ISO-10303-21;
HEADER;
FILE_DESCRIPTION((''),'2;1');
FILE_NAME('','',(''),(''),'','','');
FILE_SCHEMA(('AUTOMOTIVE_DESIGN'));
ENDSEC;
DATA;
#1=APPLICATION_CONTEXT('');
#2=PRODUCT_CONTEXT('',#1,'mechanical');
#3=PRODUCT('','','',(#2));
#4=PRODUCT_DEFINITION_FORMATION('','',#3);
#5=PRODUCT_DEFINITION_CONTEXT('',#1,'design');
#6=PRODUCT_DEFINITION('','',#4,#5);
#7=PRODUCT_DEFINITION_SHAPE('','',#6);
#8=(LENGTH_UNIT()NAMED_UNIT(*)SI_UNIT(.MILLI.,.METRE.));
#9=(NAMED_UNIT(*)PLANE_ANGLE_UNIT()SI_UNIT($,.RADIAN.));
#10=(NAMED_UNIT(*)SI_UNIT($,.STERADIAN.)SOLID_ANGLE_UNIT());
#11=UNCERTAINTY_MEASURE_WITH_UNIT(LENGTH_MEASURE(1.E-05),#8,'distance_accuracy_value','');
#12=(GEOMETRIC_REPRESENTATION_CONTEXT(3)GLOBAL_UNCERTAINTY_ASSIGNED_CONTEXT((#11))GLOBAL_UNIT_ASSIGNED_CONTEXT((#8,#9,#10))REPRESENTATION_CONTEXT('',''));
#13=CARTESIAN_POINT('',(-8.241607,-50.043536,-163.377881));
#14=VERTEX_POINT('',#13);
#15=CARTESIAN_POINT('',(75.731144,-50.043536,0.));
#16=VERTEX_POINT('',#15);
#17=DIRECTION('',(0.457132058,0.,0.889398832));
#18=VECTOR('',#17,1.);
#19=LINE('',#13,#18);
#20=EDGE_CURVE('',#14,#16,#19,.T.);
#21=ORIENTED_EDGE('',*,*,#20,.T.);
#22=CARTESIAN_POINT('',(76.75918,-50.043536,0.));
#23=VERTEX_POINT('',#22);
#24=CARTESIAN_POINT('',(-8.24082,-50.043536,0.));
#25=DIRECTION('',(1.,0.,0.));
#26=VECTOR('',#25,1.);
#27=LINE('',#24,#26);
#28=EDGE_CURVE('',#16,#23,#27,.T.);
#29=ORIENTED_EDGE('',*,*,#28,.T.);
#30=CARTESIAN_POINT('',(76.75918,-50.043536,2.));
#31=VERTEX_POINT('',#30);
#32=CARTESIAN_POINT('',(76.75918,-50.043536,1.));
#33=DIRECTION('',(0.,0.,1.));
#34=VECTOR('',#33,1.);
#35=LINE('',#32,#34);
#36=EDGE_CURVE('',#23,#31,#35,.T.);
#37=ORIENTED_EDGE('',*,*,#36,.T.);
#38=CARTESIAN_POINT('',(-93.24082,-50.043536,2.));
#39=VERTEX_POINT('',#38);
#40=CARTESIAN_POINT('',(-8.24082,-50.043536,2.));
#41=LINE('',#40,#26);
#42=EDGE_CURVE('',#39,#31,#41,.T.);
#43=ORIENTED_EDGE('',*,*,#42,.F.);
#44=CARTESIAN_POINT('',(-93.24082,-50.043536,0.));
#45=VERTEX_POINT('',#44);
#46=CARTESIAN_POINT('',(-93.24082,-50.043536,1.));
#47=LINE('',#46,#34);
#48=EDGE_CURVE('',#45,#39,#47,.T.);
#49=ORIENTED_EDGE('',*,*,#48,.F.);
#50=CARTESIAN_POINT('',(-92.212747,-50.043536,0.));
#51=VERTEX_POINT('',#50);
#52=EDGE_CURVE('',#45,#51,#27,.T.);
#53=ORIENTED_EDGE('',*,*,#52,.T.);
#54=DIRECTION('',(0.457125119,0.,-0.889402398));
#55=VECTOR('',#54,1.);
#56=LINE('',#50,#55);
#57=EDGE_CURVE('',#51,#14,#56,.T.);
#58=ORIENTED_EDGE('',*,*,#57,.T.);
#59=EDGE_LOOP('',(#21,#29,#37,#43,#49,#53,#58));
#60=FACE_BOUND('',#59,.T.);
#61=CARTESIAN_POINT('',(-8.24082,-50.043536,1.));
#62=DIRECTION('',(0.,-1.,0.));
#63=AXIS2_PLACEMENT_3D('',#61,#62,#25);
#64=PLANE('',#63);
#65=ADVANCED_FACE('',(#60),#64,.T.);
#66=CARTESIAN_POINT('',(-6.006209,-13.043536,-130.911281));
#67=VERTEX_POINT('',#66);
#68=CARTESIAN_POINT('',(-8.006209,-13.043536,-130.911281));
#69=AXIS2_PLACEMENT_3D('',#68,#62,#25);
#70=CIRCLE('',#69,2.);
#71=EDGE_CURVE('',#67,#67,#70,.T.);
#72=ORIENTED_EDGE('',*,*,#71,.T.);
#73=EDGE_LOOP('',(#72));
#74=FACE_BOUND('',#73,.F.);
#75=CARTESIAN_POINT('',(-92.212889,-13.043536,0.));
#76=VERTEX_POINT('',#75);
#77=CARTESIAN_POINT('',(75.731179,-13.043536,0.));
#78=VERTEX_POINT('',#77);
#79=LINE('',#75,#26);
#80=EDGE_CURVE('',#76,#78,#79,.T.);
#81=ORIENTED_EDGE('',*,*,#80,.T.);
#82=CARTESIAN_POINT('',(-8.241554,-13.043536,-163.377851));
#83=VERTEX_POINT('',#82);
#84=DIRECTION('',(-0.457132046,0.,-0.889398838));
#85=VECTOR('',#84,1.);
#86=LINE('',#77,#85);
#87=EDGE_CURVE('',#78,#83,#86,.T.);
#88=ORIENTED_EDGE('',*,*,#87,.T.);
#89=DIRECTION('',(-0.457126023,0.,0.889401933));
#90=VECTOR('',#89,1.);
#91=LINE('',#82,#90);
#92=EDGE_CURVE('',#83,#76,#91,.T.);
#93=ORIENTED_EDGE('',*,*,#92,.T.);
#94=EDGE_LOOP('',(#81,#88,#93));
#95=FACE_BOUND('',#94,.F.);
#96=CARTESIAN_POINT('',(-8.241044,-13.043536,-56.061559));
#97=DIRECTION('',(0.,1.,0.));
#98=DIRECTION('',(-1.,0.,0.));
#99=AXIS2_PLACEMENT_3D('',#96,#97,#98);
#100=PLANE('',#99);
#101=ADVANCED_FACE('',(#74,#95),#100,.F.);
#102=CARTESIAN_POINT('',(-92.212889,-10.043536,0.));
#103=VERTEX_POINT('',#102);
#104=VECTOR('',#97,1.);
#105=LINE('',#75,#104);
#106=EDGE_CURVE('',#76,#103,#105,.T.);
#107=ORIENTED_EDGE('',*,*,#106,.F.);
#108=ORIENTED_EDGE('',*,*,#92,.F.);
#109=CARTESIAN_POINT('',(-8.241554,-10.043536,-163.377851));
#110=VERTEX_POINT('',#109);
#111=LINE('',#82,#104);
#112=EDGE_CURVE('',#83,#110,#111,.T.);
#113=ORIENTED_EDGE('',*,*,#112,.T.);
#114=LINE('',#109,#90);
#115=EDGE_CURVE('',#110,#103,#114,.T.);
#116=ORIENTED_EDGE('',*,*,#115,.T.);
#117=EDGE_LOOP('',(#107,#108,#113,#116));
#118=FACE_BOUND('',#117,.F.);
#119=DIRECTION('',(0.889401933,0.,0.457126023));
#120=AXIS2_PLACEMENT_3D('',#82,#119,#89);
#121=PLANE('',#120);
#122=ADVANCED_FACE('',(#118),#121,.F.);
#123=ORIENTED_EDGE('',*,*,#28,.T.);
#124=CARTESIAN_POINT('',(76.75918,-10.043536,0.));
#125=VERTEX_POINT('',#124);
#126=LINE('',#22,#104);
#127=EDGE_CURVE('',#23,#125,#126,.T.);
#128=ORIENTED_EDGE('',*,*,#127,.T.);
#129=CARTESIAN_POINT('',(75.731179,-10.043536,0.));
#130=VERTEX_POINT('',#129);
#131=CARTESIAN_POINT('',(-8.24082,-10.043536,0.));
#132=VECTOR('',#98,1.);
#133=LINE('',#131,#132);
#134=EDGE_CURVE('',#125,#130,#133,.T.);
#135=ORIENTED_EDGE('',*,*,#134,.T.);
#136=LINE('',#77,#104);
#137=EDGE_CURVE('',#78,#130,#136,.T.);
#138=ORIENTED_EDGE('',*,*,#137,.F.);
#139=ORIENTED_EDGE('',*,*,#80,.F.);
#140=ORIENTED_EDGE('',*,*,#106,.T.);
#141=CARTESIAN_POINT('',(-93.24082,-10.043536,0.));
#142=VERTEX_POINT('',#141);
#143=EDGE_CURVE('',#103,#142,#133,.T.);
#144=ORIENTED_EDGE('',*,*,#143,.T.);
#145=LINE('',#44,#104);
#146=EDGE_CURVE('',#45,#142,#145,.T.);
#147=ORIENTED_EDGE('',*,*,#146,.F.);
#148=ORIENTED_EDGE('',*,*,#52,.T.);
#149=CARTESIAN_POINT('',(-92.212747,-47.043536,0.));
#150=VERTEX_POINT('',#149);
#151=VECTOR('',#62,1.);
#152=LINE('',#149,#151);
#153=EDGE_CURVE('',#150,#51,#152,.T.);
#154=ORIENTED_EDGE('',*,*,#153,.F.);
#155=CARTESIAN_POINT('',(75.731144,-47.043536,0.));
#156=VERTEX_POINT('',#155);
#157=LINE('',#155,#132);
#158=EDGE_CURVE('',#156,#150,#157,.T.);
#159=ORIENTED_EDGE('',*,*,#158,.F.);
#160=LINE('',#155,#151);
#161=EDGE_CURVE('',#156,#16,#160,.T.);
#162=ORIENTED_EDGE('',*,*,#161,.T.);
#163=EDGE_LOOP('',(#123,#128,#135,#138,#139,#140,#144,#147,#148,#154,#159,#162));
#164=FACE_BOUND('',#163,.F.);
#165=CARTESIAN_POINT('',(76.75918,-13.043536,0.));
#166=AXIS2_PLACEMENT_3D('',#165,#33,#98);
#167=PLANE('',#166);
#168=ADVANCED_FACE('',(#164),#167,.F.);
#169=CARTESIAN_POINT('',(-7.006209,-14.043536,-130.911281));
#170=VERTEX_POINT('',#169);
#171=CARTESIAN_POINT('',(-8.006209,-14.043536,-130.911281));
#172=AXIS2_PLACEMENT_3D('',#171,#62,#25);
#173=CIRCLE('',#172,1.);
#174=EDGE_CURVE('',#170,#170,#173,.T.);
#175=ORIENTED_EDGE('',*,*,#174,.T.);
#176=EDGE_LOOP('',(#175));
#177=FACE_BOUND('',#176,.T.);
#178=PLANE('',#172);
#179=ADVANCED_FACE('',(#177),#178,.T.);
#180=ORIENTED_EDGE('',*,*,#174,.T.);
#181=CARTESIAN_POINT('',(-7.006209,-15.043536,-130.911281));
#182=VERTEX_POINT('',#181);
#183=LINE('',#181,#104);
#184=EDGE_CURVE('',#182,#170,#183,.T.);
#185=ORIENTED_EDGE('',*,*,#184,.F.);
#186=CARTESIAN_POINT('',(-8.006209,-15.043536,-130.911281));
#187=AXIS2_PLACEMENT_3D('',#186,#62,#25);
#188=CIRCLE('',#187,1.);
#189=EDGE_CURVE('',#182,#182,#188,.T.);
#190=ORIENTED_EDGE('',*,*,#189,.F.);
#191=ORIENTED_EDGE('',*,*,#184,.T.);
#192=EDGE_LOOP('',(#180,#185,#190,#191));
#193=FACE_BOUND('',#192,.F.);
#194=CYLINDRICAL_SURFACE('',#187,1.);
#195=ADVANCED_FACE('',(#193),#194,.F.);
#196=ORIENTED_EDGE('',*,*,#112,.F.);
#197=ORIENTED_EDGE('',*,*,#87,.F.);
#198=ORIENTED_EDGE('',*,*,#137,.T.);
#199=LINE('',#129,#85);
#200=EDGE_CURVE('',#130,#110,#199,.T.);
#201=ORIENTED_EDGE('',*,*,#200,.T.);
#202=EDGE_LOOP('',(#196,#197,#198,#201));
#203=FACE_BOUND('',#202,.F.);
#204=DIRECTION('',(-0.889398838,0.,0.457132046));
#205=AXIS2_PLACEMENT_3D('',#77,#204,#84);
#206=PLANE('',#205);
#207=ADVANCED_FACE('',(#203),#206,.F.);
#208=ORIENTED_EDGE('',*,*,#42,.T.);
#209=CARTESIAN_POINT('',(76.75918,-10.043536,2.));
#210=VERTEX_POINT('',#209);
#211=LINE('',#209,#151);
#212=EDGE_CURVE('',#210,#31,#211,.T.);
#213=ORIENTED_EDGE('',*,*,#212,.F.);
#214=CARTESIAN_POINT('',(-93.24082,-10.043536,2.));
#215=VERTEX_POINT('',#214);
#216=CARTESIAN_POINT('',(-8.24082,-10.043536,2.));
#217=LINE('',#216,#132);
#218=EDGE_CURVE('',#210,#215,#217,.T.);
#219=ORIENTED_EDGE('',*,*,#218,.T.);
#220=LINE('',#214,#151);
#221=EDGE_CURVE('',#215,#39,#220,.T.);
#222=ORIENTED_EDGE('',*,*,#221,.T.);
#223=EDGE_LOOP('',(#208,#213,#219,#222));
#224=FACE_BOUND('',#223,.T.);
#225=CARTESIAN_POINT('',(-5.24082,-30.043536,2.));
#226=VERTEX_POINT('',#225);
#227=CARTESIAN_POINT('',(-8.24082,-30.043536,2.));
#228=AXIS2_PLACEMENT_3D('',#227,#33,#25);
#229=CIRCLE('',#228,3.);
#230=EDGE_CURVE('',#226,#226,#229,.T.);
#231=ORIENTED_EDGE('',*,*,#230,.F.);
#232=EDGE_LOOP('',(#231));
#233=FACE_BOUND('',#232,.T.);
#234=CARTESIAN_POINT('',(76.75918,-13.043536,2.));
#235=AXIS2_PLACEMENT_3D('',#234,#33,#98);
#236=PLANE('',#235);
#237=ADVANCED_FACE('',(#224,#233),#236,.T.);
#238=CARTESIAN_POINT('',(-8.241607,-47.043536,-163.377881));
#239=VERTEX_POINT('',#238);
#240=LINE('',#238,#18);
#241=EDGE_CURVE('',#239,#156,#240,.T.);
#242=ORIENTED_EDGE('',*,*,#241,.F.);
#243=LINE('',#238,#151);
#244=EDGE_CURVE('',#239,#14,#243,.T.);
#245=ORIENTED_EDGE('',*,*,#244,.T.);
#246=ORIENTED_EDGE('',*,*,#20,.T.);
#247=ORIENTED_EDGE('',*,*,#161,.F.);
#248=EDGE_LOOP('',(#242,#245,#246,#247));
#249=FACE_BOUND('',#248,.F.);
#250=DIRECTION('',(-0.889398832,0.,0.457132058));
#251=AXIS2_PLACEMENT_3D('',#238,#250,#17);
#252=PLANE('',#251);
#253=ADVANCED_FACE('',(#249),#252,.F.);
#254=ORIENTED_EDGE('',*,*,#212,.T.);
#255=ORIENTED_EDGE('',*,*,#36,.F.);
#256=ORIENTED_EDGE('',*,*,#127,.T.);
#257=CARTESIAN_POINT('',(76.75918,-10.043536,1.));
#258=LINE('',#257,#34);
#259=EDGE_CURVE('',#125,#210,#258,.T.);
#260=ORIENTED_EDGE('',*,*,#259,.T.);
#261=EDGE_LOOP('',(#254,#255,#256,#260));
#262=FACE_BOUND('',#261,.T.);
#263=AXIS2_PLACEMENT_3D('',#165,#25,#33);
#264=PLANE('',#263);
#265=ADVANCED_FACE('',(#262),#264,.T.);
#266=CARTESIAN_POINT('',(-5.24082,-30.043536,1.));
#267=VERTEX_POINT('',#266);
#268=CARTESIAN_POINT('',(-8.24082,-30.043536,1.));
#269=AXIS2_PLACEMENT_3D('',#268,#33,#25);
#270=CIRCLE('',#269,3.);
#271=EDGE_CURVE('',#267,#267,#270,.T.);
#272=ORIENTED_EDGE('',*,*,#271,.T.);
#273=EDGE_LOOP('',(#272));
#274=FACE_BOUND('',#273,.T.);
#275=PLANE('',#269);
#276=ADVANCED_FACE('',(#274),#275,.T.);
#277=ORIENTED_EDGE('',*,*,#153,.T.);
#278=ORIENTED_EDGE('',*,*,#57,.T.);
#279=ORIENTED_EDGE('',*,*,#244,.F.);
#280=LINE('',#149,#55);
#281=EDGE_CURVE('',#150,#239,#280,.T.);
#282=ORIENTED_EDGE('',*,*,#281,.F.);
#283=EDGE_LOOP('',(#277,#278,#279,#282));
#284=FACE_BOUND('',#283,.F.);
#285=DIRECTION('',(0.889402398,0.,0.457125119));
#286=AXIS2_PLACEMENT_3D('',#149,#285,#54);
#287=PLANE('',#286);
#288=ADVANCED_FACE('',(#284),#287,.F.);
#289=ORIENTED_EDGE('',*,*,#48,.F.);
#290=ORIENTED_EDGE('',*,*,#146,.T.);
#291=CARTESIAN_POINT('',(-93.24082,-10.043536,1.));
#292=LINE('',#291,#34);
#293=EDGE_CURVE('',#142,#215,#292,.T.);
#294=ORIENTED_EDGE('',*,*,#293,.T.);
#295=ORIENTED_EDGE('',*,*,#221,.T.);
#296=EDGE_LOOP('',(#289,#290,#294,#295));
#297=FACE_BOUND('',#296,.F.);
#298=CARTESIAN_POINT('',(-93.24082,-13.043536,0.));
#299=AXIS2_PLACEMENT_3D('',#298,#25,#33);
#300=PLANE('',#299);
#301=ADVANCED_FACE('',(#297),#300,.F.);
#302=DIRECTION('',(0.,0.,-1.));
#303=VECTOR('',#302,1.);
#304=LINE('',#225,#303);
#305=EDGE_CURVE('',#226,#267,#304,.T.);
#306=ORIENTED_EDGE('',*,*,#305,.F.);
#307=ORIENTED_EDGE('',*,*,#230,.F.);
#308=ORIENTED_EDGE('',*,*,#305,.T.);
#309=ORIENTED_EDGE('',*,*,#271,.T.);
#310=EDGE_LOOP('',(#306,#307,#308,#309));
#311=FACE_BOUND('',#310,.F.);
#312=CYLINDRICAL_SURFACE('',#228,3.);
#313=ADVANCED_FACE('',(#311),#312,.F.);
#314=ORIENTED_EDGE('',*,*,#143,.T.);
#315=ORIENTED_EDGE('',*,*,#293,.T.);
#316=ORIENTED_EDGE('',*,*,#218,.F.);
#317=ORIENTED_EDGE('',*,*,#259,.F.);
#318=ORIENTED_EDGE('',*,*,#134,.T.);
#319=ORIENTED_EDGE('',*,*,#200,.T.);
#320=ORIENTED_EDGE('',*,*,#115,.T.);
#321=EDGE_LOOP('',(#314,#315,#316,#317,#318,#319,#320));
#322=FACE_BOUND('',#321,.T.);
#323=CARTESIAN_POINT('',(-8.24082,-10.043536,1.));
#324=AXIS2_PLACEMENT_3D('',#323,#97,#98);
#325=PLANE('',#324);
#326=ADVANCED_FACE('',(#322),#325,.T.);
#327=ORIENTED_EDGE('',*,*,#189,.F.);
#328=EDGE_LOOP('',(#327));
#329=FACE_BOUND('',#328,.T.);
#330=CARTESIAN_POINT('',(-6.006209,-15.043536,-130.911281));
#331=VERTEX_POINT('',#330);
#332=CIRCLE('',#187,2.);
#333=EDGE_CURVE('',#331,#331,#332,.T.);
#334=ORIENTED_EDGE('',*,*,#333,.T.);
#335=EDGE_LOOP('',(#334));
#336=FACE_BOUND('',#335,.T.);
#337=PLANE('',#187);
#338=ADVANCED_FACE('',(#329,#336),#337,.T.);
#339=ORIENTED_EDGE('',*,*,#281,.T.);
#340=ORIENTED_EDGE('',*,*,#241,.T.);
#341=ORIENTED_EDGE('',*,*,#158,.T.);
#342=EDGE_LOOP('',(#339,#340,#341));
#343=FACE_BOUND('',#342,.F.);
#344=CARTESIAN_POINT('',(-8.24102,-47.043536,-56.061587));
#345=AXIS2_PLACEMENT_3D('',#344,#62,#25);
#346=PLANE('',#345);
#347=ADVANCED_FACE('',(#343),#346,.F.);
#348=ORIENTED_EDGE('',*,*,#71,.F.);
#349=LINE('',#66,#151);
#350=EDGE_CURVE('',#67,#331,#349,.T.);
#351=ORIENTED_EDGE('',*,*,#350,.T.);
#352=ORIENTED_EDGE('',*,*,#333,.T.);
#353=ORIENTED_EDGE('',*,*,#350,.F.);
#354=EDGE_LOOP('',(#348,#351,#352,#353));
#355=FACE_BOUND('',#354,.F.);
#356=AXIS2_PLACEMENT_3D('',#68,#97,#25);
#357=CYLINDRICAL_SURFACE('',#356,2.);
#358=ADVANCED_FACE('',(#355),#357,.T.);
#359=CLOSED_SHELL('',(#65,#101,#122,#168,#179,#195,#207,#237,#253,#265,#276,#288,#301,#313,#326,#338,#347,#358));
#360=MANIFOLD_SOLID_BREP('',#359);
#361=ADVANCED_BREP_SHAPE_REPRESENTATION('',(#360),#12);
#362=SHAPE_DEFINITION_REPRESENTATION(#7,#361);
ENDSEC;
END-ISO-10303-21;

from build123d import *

# Parameters (mm, degrees)
F0_W      = 170
F0_H      = 34
F1_DEPTH  = 2
F2_W      = 170
F2_H      = 2
F4_DEPTH  = 3
F5_W      = 170
F5_H      = 2
F7_DEPTH  = 3
F8_R      = 2
F9_DEPTH  = 2
F10_R     = 1
F11_DEPTH = 1
F12_R     = 3
F13_DEPTH = 1


with BuildPart() as f1:
    # F0 (on Top) → F1 (new body)
    with BuildSketch(Plane.XY):
        with Locations((-8.2408198714, -30.0435358584)):
            Rectangle(F0_W, F0_H)
    extrude(amount=F1_DEPTH)

    # F2 (on face) + F3 (on face) → F4 (join)
    with BuildSketch(Plane.XZ.offset(47.0435358584)):
        with Locations((-8.2408198714, 1)):
            Rectangle(F2_W, F2_H)
    with BuildSketch(Plane.XZ.offset(47.0435358584)):
        Polygon((75.7311444739, 0), (-92.2127468976, 0), (-8.2416068763, -163.3778810501), align=None)
    extrude(amount=F4_DEPTH)

    # F6 (on face) + F5 (on face) → F7 (join)
    with BuildSketch(Plane(origin=(0, -13.0435358584, 0), x_dir=(-1, 0, 0), z_dir=(0, 1, 0))):
        Polygon((92.2128885412, 0), (-75.7311794344, 0), (8.2415537909, -163.3778512478), align=None)
    with BuildSketch(Plane(origin=(0, -13.0435358584, 0), x_dir=(-1, 0, 0), z_dir=(0, 1, 0))):
        with Locations((8.2408198714, 1)):
            Rectangle(F5_W, F5_H)
    extrude(amount=F7_DEPTH)

    # F8 (on face) → F9 (join)
    with BuildSketch(Plane.XZ.offset(13.0435358584)):
        with Locations((-8.0062086027, -130.911280853)):
            Circle(F8_R)
    extrude(amount=F9_DEPTH)

    # F10 (on face) → F11 (cut)
    with BuildSketch(Plane.XZ.offset(15.0435358584)):
        with Locations((-8.0062086027, -130.911280853)):
            Circle(F10_R)
    extrude(amount=-F11_DEPTH, mode=Mode.SUBTRACT)

    # F12 (on face) → F13 (cut)
    with BuildSketch(Plane.XY.offset(2)):
        with Locations((-8.2408198714, -30.0435358584)):
            Circle(F12_R)
    extrude(amount=-F13_DEPTH, mode=Mode.SUBTRACT)


solid = f1.part
